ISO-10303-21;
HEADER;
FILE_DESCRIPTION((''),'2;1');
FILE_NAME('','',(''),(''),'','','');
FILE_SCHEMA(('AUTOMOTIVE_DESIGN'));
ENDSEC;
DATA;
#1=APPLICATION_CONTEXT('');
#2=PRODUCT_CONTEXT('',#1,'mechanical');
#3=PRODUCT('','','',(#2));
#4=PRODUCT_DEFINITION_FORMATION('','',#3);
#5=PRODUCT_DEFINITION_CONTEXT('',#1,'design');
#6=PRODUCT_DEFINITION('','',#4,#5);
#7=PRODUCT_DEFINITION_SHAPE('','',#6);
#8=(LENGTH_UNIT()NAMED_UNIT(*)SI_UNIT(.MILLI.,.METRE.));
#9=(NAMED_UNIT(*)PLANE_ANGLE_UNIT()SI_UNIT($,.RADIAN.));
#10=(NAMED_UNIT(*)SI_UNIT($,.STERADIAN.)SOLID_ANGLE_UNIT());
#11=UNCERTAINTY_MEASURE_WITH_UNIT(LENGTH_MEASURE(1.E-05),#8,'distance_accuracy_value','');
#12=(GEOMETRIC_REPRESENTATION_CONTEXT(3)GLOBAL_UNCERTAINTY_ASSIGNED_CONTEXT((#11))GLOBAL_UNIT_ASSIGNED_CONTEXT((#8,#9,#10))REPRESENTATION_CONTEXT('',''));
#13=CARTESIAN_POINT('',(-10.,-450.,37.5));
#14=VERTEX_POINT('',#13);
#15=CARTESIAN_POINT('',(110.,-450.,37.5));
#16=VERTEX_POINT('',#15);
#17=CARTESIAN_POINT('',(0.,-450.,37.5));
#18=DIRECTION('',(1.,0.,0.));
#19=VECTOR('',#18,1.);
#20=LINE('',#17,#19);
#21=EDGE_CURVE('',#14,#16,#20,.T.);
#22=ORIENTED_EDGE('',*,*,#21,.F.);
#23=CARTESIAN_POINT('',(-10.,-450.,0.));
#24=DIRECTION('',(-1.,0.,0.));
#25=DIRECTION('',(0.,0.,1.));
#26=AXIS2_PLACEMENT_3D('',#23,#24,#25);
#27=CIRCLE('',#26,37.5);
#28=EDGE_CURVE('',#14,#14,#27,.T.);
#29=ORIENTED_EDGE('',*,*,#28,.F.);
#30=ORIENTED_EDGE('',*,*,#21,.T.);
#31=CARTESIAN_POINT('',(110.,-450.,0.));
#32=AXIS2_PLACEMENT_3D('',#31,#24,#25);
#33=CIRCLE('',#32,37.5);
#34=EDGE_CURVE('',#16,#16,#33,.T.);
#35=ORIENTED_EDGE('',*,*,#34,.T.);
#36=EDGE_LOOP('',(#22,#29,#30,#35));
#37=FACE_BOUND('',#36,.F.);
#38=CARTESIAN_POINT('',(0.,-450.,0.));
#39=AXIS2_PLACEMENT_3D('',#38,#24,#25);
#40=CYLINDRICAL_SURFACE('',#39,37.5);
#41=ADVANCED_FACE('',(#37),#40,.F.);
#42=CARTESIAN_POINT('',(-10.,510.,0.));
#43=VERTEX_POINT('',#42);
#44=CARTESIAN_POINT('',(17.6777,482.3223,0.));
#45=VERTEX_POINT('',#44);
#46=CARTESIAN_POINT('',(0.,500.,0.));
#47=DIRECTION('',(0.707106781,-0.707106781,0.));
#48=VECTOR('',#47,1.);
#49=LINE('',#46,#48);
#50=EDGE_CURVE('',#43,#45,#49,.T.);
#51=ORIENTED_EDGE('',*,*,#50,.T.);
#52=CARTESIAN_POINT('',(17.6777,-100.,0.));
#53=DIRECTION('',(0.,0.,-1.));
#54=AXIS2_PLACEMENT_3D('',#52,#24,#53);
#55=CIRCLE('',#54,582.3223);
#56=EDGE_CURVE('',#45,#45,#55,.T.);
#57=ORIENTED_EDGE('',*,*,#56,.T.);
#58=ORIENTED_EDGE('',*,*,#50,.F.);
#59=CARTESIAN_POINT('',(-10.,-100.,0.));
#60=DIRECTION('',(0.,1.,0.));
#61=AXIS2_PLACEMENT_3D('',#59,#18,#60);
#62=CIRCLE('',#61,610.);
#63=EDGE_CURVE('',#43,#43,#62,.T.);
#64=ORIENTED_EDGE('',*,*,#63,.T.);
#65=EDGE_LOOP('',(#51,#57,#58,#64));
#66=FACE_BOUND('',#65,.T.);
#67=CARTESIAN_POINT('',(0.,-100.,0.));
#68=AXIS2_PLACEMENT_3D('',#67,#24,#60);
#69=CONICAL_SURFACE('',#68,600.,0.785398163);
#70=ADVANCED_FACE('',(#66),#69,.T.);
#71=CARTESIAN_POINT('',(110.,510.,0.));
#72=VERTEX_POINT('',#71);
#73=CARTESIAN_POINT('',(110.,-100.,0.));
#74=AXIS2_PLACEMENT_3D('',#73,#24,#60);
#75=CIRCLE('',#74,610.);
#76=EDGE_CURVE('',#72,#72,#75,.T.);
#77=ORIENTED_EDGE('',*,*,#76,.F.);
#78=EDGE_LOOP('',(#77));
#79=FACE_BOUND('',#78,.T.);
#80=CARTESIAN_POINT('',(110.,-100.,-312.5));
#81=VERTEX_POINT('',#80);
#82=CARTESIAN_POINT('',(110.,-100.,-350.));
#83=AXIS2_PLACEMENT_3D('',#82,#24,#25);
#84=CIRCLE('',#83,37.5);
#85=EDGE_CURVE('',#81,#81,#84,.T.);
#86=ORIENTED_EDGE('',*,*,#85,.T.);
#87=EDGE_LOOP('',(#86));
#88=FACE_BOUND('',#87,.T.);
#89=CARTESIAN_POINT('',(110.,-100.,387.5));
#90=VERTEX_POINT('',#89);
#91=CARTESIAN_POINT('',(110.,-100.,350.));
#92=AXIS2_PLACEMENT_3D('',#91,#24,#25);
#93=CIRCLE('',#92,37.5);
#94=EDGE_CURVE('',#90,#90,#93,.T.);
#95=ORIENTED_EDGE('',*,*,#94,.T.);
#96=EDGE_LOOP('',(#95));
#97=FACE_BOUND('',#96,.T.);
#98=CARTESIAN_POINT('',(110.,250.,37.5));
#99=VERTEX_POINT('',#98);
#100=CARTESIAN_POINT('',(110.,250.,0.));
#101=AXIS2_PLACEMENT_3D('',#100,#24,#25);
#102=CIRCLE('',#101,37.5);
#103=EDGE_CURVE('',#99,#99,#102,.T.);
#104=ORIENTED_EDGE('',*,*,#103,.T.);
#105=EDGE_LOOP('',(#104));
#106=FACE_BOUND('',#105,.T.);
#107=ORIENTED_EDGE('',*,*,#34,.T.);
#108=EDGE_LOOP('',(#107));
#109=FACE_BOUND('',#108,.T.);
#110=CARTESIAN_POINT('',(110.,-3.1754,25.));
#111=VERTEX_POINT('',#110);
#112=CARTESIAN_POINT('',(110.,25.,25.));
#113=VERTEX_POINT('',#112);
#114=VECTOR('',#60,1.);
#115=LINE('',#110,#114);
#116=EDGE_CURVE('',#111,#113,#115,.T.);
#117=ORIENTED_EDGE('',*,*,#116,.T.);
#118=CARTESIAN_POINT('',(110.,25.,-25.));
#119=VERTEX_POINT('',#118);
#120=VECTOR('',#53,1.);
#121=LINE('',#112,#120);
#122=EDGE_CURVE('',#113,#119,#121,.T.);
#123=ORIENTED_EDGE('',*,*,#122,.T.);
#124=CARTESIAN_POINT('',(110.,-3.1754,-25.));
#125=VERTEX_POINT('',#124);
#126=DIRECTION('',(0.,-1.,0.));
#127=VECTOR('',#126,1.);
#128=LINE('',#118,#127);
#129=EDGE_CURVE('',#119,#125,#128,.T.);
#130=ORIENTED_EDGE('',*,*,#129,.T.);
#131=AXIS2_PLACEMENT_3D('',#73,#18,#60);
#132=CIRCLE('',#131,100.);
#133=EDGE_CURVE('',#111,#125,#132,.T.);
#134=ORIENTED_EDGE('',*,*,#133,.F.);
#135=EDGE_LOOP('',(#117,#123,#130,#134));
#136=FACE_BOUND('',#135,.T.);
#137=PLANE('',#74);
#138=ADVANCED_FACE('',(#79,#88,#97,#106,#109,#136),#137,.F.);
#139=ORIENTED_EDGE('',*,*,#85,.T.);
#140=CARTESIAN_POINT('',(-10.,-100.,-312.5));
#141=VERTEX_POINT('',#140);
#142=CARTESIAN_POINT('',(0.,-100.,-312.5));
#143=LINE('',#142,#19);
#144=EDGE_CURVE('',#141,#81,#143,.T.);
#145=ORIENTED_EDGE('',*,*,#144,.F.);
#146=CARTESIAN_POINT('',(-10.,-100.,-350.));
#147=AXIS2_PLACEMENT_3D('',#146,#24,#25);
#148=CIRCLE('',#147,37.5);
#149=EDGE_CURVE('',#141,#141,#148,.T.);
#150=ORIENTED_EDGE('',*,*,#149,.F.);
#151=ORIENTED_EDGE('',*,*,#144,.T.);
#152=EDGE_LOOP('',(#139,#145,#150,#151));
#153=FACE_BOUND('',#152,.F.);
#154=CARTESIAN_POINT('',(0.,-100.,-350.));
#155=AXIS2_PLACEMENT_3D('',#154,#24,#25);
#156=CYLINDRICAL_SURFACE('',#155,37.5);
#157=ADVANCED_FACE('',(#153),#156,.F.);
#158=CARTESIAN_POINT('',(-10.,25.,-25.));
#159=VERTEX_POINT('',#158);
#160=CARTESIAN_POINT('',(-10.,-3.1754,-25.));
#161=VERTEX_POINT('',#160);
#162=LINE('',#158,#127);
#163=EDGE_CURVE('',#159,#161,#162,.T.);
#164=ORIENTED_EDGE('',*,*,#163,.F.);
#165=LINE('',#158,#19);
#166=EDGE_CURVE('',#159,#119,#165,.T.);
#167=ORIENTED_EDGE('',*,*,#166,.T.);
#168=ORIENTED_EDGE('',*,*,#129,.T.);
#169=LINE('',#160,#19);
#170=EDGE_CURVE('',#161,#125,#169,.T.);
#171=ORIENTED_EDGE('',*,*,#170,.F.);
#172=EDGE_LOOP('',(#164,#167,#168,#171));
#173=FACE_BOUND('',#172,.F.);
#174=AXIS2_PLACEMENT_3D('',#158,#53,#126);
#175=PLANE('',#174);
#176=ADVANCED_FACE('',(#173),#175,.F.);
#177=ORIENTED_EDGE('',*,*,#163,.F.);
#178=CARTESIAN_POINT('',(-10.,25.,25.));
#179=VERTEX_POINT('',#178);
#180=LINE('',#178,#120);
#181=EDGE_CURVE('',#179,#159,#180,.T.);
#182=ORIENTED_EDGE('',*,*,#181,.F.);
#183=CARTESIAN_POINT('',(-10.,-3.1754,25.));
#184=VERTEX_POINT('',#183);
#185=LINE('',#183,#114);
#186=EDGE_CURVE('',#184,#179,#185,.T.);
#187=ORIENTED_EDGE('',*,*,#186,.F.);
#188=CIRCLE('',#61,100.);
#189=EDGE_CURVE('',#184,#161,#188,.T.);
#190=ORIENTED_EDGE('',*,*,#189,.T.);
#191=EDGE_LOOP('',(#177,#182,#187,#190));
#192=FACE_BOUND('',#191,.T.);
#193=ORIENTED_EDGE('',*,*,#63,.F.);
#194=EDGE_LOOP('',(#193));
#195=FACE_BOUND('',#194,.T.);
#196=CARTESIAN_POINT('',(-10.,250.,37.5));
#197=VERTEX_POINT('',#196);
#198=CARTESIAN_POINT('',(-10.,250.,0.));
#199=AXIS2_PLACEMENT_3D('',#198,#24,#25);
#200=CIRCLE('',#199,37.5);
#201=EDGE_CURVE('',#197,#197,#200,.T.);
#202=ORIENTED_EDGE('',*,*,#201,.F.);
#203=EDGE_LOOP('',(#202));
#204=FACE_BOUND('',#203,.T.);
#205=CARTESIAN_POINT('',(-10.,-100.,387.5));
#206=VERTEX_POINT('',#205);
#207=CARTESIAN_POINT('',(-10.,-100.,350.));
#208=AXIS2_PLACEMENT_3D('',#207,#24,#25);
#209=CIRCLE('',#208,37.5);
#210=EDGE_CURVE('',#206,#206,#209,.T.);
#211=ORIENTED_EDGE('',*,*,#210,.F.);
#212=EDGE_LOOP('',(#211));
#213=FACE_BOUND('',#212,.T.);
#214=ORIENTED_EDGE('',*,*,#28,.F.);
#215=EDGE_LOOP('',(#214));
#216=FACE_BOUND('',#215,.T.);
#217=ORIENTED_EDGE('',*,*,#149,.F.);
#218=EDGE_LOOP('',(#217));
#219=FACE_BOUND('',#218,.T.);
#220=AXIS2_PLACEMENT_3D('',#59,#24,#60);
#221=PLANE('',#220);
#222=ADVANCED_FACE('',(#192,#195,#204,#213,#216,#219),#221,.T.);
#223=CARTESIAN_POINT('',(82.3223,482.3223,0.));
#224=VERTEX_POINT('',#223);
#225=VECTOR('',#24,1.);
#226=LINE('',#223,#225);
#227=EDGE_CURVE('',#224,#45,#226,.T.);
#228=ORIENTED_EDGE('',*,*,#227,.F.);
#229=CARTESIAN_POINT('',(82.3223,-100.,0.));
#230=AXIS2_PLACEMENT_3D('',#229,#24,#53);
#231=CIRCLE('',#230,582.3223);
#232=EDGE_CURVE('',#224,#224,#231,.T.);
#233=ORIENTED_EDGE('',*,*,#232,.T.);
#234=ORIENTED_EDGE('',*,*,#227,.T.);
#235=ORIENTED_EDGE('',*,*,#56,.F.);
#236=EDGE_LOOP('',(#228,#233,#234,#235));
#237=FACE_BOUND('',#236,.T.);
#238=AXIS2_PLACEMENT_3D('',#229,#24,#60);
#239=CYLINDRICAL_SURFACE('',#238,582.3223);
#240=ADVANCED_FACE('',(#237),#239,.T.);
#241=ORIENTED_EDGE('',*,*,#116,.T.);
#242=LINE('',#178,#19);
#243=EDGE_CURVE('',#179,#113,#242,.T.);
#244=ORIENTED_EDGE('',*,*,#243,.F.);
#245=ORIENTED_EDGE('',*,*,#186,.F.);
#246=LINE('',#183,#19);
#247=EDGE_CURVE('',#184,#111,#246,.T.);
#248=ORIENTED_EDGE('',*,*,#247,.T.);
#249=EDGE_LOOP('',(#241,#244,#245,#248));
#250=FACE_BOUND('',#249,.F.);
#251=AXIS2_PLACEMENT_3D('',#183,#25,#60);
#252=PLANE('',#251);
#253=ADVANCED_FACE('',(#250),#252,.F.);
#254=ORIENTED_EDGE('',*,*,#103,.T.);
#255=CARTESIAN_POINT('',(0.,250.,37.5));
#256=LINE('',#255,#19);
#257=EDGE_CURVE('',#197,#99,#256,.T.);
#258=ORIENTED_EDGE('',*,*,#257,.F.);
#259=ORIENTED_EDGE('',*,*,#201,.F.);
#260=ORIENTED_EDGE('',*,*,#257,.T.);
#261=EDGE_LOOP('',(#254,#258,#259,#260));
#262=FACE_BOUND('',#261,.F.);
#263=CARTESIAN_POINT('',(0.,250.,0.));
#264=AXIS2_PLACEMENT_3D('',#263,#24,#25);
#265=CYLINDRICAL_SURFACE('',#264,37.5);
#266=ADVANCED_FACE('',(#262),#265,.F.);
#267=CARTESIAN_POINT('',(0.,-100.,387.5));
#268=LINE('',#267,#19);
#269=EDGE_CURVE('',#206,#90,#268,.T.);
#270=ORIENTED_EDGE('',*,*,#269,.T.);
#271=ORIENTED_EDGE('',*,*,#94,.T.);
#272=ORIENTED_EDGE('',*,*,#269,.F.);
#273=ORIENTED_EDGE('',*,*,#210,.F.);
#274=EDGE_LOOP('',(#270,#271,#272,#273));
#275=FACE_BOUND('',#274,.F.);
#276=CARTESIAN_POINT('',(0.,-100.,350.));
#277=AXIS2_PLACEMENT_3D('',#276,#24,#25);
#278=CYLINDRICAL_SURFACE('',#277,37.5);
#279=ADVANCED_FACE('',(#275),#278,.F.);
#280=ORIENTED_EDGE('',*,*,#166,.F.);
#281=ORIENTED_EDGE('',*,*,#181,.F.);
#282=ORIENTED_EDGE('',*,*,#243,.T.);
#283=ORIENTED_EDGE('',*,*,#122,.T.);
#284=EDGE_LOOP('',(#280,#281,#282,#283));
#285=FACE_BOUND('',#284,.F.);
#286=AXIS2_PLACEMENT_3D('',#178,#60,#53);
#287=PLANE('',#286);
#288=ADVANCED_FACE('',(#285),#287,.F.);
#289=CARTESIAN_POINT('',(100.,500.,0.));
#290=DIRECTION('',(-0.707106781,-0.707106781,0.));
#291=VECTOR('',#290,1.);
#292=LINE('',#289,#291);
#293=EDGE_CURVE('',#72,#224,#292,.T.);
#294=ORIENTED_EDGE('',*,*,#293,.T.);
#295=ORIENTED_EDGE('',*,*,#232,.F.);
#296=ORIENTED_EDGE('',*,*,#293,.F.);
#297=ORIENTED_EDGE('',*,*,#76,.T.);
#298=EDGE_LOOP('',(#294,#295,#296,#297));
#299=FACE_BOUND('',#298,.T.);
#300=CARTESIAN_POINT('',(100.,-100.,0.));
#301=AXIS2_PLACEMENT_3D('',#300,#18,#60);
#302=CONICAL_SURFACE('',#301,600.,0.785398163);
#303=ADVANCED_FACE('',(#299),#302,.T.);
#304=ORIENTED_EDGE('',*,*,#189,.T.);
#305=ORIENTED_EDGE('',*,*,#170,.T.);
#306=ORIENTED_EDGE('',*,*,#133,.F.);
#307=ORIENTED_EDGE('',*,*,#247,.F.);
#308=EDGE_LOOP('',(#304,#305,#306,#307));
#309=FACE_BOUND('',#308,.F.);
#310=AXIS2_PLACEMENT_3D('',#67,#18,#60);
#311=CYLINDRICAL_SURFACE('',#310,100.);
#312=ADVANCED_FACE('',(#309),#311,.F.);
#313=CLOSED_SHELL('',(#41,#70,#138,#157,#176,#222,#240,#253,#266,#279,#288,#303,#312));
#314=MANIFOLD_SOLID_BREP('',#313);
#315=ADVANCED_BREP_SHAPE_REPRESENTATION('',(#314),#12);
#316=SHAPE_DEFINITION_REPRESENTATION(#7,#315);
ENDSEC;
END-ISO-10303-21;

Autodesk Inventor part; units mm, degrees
ref_plane "YZ Plane" through (0, 0, 0) normal (1, 0, 0) x (0, 1, 0)
ref_plane "XZ Plane" through (0, 0, 0) normal (0, 1, 0) x (-1, 0, 0)
ref_plane "XY Plane" through (0, 0, 0) normal (0, 0, 1) x (1, 0, 0)
sketch "Sketch1" plane through (0, 0, 0) normal (0, 0, 1) x (1, 0, 0)
  line L0 (0, 0) -> (100, 0)
  line L1 (100, 0) -> (100, 500)
  line L2 (0, 500) -> (0, 0)
  line L3 (0, 500) -> (17.6777, 482.3223)
  line L4 (0, 500) -> (25, 500) construction
  line L5 (100, 500) -> (82.3223, 482.3223)
  line L6 (100, 500) -> (125, 500) construction
  line L7 (82.3223, 482.3223) -> (17.6777, 482.3223)
  line L8 (50, -100) -> (-150, -100)
  dimension "d7" = 200
revolve "Revolution1" add sketch "Sketch1" angle 360 about axis through (50, -100, 0) along (-1, 0, 0)
sketch "Sketch2" plane through (0, -100, 0) normal (-1, 0, 0) x (0, 0, 1)
  circle A0 centre (0, 0) radius 600 projected
  circle A1 centre (350, 0) radius 37.5
  circle A2 centre (0, 0) radius 100
  circle A3 centre (0, -350) radius 37.5
  circle A4 centre (-350, 0) radius 37.5
  circle A5 centre (0, 350) radius 37.5
  point P0 (0, 100)
  dimension "d9" = 75
  dimension "d12" = 360
extrude "Extrusion1" cut sketch "Sketch2" against normal blind 200 contours A1 | A3 | A4 | A5
thicken "Thicken1" operation add thickness 10 both sides no extend neighbours yes toward (1, 0, 0) faces at (100, -364.9419, 262.9039)
thicken "Thicken2" operation add thickness 10 both sides no extend neighbours yes toward (-1, 0, 0) faces at (0, -364.9419, 262.9039)
sketch "Sketch3" plane through (-10, -100, 0) normal (-1, 0, 0) x (0, 0, 1)
  line L0 (25, 96.8246) -> (25, 125)
  line L1 (25, 125) -> (-25, 125)
  line L2 (-25, 125) -> (-25, 96.8246)
  line L3 (-25, 75) -> (25, 125) construction
  line L4 (25, 75) -> (-25, 125) construction
  circle A0 centre (0, 0) radius 100 projected
  circle A1 centre (0, 0) radius 100
  point P0 (0, 100)
extrude "Extrusion2" cut sketch "Sketch3" against normal blind 120 contours A0 L2 L1 L0
properties part number "Practica 2 Polea"
